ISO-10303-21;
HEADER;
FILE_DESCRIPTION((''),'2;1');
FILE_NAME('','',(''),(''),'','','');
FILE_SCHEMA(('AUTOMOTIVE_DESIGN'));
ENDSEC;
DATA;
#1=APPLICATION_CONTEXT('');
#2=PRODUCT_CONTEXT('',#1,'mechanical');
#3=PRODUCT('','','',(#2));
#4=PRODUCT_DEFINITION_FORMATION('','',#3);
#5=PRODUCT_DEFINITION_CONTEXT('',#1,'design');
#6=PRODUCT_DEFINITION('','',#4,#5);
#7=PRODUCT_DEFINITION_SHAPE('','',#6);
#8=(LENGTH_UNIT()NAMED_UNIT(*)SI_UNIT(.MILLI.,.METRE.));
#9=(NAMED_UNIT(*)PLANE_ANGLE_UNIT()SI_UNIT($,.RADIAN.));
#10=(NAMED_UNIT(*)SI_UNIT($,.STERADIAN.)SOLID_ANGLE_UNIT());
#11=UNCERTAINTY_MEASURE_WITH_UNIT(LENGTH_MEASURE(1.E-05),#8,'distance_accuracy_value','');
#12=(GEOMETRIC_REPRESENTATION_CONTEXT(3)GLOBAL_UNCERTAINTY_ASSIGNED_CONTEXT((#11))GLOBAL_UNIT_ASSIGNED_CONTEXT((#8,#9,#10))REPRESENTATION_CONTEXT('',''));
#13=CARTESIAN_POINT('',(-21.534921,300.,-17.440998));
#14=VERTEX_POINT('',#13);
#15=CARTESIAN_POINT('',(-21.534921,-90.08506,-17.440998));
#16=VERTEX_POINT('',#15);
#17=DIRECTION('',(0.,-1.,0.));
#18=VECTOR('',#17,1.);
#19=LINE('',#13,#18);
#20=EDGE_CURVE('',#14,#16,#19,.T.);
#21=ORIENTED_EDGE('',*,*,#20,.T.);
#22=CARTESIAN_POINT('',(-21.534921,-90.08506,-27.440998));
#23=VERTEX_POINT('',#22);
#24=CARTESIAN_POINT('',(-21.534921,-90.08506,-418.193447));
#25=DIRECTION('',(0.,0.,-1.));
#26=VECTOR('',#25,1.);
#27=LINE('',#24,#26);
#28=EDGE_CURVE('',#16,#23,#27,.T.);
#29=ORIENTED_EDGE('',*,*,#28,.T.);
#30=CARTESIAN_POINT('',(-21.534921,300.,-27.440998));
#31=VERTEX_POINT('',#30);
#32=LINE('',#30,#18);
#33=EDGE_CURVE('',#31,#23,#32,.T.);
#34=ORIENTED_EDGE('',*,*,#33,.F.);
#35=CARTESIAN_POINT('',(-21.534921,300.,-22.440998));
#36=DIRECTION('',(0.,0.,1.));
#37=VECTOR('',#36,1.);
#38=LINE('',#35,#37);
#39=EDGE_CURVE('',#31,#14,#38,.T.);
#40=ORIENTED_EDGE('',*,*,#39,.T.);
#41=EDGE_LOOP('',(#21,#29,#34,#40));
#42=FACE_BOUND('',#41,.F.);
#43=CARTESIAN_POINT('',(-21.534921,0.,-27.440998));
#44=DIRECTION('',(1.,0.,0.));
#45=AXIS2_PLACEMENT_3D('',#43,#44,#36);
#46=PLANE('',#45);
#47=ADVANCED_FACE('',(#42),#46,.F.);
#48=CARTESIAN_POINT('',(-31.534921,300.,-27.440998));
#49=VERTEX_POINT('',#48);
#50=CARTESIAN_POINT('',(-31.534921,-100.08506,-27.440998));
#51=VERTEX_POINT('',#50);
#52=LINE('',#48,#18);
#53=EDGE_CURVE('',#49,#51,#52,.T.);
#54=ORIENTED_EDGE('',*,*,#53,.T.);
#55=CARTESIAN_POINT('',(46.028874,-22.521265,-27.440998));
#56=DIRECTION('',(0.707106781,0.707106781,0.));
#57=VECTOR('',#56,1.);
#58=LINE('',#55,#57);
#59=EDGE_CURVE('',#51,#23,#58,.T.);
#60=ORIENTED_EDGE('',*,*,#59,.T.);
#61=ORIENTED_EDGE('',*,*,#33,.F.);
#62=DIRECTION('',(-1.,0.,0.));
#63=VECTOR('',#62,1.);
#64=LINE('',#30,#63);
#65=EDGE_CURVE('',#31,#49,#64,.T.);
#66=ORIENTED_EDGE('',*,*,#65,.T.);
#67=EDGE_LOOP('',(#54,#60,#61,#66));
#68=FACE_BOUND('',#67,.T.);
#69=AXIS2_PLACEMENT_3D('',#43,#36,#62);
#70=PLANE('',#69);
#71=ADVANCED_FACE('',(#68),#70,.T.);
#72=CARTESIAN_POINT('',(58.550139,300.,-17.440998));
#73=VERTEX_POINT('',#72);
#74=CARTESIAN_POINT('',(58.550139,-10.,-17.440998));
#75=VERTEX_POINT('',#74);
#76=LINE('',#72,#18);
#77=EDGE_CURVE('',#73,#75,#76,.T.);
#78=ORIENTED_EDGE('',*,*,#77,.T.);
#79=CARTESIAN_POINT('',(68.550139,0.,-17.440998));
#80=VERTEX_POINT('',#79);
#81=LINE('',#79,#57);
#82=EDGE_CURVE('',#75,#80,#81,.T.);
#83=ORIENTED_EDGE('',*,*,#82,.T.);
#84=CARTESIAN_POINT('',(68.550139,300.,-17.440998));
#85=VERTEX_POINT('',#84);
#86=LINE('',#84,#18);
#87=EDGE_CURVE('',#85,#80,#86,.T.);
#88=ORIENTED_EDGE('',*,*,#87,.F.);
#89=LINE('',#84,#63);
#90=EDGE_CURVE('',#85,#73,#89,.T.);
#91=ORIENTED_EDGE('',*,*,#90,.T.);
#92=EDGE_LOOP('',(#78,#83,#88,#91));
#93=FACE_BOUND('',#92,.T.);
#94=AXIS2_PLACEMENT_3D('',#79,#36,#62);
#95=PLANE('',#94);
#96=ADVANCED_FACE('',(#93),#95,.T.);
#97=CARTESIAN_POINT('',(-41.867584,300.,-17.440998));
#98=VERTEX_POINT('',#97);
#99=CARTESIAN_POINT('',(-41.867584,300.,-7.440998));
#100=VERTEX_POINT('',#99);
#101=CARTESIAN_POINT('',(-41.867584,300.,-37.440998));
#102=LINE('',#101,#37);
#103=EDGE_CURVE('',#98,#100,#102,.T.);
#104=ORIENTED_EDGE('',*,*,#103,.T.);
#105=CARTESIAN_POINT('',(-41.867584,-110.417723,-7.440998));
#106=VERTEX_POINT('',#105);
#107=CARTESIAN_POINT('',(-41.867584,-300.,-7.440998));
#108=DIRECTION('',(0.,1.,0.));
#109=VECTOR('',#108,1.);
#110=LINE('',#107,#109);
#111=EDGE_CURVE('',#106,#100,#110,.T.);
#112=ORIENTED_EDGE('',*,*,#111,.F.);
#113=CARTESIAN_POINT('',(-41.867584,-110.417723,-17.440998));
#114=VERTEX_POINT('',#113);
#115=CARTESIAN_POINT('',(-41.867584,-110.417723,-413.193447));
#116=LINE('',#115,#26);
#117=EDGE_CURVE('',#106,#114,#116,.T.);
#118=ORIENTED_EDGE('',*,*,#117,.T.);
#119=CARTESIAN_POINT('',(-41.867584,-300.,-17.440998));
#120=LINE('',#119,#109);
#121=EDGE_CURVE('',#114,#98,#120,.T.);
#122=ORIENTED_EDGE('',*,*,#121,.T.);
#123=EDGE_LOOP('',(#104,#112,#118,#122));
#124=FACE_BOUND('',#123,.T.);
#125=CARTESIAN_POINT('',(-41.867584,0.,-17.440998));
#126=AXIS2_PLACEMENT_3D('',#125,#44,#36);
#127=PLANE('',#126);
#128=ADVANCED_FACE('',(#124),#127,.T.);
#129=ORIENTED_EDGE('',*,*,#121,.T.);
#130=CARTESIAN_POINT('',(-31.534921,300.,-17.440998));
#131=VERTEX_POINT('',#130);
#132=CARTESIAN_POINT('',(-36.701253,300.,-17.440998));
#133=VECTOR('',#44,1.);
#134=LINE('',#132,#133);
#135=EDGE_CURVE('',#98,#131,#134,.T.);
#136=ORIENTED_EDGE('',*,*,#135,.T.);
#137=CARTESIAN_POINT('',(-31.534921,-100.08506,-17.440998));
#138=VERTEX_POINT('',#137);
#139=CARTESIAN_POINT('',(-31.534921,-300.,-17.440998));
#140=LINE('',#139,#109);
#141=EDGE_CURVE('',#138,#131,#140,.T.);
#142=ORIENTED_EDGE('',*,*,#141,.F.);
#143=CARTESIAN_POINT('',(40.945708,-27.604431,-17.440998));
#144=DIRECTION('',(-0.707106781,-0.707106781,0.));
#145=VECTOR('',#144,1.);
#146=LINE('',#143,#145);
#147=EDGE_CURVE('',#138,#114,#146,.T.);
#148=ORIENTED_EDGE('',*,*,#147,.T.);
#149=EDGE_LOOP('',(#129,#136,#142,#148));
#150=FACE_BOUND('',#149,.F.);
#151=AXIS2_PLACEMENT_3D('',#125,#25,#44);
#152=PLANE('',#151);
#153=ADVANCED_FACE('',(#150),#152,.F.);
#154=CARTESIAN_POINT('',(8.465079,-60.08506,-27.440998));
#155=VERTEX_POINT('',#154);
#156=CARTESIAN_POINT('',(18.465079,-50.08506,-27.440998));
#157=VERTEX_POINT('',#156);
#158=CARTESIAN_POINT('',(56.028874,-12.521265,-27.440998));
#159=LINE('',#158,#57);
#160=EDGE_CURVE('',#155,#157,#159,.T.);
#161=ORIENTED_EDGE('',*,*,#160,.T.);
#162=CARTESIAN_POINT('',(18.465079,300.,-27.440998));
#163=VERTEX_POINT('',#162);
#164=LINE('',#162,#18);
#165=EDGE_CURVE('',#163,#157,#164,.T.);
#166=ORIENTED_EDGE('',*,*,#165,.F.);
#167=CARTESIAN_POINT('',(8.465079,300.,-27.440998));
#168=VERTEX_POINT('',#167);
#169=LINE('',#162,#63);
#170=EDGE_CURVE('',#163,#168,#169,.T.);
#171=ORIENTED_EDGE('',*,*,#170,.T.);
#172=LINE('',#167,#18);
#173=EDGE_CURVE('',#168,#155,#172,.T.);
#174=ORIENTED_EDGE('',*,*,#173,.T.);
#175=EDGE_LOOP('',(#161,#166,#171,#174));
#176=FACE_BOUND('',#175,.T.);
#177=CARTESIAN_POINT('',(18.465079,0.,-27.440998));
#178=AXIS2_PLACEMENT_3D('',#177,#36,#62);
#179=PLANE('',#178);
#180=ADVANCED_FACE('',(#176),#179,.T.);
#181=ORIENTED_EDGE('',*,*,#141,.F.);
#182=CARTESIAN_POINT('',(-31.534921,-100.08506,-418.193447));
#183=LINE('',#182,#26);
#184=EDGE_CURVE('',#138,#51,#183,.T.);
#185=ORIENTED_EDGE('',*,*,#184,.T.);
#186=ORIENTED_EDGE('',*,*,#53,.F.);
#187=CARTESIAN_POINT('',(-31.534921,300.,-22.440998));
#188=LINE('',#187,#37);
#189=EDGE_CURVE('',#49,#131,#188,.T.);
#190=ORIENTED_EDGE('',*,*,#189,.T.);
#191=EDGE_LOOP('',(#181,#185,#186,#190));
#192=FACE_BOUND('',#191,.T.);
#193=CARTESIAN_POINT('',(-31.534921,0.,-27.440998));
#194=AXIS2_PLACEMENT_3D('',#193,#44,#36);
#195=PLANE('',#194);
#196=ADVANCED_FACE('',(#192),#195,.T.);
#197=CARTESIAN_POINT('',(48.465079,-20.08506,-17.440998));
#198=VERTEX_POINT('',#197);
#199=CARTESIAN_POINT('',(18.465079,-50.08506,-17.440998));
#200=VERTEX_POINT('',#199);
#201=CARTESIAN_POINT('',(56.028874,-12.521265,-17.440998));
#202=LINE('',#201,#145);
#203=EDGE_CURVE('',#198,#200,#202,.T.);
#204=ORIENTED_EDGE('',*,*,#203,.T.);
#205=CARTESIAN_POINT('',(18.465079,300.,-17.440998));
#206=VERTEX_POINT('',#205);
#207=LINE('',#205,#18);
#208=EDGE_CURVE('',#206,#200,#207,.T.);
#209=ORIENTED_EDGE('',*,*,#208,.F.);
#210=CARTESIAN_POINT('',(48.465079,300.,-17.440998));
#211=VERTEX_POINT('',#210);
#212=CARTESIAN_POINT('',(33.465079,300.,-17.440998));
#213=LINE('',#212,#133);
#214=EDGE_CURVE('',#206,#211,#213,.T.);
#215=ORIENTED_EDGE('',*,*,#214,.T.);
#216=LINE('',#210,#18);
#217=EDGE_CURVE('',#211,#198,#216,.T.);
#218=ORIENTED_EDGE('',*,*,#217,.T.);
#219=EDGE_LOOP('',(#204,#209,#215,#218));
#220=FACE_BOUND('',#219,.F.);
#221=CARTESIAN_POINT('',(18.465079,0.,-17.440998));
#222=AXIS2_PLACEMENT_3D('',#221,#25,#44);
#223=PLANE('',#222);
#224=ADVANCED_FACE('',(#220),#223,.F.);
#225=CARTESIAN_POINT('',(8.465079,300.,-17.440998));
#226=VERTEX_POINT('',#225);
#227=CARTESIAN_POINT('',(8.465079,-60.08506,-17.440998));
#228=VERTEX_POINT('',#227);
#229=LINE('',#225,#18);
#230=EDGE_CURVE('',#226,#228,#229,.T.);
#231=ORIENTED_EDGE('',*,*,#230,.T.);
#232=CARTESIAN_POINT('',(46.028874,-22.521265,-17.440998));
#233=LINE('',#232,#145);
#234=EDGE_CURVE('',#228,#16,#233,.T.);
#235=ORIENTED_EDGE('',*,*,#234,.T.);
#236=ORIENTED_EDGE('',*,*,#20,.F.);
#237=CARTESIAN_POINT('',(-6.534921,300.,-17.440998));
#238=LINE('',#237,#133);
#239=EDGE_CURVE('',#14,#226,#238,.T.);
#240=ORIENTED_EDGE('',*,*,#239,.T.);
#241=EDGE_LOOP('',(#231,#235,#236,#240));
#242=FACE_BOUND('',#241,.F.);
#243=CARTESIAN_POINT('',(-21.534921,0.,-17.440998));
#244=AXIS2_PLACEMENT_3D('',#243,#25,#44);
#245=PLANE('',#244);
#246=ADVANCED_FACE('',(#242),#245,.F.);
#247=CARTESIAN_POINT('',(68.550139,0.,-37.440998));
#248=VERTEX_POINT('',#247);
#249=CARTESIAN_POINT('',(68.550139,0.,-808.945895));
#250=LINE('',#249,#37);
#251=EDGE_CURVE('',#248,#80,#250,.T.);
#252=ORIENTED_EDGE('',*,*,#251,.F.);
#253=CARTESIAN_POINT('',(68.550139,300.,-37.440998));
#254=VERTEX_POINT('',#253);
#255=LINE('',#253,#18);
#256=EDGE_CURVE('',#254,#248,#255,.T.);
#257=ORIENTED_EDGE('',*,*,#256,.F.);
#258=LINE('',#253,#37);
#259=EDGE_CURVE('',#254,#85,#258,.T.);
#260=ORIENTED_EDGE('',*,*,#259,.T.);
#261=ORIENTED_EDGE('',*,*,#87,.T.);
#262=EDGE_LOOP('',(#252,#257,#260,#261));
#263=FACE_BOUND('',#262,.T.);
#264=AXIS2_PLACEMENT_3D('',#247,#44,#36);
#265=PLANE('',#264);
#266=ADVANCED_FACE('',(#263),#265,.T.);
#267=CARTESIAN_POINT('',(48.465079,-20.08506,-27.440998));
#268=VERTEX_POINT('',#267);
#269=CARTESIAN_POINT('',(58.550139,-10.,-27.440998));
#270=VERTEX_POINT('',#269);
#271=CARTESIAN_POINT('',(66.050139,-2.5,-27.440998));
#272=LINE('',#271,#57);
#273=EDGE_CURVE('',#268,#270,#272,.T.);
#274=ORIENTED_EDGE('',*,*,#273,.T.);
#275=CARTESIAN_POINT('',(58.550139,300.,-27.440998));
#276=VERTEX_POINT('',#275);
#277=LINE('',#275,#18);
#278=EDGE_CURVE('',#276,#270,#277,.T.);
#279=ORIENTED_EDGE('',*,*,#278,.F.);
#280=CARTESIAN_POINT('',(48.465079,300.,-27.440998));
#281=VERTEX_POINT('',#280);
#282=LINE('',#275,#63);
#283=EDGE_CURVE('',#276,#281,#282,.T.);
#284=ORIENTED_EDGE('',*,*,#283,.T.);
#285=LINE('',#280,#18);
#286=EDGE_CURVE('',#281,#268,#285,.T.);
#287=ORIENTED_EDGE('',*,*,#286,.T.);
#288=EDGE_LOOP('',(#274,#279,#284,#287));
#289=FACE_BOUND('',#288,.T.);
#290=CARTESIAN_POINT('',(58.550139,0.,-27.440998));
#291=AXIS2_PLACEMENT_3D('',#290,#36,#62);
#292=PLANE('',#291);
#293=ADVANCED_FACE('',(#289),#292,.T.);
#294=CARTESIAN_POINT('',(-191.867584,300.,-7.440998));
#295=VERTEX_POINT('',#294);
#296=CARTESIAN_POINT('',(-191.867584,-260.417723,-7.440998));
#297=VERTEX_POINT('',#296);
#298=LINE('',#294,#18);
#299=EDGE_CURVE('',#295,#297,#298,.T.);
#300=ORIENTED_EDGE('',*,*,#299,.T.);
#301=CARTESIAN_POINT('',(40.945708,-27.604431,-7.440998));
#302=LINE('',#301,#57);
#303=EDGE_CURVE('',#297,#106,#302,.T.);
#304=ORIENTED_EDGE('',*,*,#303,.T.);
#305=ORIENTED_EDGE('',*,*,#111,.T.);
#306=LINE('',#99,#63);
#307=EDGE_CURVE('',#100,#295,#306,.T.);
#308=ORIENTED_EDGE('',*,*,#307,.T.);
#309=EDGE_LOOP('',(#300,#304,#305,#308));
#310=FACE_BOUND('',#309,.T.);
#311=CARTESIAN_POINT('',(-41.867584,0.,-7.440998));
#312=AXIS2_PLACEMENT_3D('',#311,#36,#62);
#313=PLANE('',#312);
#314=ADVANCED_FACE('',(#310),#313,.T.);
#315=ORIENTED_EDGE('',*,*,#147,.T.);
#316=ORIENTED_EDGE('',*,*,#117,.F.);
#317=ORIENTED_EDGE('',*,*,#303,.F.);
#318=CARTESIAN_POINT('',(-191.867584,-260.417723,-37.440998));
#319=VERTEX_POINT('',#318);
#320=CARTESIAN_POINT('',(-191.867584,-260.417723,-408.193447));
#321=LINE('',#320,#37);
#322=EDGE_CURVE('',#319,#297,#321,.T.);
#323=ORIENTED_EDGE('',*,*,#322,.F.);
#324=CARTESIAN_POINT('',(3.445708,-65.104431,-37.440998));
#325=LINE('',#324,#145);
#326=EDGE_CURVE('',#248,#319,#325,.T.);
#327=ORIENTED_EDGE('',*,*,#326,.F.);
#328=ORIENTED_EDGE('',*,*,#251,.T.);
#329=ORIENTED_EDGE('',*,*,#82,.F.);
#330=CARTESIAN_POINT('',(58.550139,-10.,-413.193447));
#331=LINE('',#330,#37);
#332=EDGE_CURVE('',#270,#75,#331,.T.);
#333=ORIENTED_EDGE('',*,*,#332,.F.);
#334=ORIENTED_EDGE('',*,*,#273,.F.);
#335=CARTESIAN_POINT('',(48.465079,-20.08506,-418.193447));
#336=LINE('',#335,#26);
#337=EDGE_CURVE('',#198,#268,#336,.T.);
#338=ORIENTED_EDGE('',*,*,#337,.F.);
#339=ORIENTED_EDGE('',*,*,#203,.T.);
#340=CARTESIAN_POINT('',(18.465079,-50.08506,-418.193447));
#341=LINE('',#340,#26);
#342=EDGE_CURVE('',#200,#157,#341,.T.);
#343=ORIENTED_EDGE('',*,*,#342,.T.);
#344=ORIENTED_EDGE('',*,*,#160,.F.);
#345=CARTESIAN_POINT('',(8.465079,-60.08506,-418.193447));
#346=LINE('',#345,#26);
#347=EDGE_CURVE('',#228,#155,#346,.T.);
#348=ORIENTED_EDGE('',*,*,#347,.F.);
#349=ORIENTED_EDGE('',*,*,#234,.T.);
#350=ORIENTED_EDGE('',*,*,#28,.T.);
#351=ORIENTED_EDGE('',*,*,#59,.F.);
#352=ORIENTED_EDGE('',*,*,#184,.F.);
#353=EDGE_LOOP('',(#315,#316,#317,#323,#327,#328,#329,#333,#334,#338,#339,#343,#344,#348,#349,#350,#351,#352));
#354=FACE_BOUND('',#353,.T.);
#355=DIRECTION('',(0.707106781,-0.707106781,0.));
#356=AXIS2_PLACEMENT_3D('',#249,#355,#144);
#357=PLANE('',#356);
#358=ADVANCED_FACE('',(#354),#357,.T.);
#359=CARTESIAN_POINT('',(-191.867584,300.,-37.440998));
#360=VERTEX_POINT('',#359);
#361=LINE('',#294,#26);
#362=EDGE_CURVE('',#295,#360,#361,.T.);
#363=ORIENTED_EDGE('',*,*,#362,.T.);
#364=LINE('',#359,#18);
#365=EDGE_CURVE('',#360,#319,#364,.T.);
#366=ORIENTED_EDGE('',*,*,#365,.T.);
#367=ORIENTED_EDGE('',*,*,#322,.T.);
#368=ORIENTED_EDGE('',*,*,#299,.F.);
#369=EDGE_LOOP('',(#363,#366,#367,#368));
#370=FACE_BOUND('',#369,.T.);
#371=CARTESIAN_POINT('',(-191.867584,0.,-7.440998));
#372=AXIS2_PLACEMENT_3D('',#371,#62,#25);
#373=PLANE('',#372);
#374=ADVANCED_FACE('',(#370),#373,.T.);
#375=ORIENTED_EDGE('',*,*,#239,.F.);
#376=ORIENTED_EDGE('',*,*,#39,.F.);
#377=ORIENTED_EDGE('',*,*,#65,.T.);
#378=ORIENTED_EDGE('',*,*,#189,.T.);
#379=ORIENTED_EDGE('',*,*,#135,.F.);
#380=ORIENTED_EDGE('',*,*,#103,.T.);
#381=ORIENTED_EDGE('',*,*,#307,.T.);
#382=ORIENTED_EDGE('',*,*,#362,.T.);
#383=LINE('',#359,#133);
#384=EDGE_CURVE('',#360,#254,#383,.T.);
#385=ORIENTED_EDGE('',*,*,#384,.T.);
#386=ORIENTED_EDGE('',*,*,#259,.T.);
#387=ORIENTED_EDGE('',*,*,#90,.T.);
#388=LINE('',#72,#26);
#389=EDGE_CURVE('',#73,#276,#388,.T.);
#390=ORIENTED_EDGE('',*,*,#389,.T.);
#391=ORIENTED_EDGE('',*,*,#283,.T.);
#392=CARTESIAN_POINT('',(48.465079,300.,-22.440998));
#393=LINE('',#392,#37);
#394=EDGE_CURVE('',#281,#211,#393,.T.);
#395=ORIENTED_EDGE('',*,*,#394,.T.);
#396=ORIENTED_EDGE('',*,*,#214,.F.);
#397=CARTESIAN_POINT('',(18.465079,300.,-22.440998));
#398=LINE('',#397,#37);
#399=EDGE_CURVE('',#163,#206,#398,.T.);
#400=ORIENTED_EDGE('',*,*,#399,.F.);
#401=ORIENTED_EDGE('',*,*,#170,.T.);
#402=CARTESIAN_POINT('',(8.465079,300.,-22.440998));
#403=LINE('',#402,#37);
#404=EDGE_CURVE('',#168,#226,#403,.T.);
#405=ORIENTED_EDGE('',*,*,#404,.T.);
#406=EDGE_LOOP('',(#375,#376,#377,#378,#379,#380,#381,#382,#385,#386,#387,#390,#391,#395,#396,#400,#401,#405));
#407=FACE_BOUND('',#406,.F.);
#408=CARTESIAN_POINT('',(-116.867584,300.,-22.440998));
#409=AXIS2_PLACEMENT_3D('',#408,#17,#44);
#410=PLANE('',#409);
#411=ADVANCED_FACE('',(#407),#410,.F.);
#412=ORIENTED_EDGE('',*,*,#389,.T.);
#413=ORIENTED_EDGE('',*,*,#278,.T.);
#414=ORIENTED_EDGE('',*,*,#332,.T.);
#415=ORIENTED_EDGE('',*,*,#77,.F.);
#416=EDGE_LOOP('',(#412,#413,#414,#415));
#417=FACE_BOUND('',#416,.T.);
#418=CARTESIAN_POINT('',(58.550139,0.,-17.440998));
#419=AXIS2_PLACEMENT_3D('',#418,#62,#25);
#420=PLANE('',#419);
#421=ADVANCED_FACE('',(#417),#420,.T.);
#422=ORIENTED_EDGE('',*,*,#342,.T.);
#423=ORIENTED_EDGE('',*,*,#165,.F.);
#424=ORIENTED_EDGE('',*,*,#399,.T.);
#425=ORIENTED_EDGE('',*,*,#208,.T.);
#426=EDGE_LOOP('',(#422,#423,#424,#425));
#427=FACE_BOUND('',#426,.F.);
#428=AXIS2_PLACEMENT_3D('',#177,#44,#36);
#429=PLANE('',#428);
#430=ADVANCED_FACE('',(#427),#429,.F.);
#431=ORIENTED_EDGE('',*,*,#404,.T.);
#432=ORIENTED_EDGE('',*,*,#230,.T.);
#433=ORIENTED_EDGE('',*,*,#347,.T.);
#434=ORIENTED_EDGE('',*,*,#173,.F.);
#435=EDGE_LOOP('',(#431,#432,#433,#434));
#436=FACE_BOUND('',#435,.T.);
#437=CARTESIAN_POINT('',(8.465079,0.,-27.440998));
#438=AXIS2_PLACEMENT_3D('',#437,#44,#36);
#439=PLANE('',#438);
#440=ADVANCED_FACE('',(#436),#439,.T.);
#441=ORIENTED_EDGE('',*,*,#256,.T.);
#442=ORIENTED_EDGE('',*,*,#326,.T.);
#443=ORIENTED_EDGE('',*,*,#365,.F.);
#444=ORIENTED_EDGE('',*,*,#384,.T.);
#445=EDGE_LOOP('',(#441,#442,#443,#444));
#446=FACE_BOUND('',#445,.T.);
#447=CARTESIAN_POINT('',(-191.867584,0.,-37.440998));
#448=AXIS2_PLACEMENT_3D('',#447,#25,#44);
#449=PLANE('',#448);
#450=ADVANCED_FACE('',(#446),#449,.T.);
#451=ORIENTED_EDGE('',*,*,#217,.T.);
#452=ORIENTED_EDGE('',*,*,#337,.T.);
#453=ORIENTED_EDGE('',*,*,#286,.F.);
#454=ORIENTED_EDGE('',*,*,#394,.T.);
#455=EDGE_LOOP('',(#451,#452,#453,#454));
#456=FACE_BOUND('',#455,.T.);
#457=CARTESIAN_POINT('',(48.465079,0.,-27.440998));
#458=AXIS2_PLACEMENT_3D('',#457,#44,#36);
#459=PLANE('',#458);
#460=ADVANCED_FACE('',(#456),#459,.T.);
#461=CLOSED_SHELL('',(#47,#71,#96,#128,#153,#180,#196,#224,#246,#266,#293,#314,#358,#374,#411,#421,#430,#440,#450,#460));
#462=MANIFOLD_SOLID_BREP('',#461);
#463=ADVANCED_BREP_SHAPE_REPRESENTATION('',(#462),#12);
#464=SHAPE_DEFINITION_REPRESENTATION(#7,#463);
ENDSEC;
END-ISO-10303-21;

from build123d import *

# Parameters (mm, degrees)
F0_W        = 30
F0_H        = 10
F0_W_2      = 10.3326633751
F1_DEPTH    = 300
F2_T1_DEPTH = 1563.0097927795


# Not quite as in the source:
# - a fillet or chamfer that OpenCascade refuses, or shapes differently, is made with other operations: its cross-section is extruded or revolved along the edge and cut away or added


with BuildPart() as f1:
    # F0 (on Front) → F1 (new body, symmetric)
    with BuildSketch(Plane.XZ):
        Polygon((-41.8675842226, -17.4409984683), (-41.8675842226, -7.4409984683), (-191.8675842226, -7.4409984683), (-191.8675842226, -37.4409984683), (-41.8675842226, -37.4409984683), (-41.8675842226, -27.4409984683), align=None)
        with Locations((33.4650791525, -22.4409984683)):
            Rectangle(F0_W, F0_H)
        with Locations((-36.7012525351, -22.4409984683)):
            Rectangle(F0_W_2, F0_H)
        with Locations((-6.5349208475, -22.4409984683)):
            Rectangle(F0_W, F0_H)
        Polygon((-31.5349208475, -27.4409984683), (-41.8675842226, -27.4409984683), (-41.8675842226, -37.4409984683), (58.5501386541, -37.4409984683), (58.5501386541, -27.4409984683), (48.4650791525, -27.4409984683), (18.4650791525, -27.4409984683), (8.4650791525, -27.4409984683), (-21.5349208475, -27.4409984683), align=None)
        Polygon((58.5501386541, -27.4409984683), (58.5501386541, -37.4409984683), (68.5501386541, -37.4409984683), (68.5501386541, -17.4409984683), (58.5501386541, -17.4409984683), align=None)
    extrude(amount=F1_DEPTH, both=True)

    # F2: chamfer of 300 on 1 edges, made by hand

    # F2_s2 → F2_t1 (cut)
    with BuildSketch(Plane.XY.offset(-808.945894858)):
        Polygon((68.5501386541, 0), (-231.4498613459, -300), (68.5501386541, -300), align=None)
    extrude(amount=F2_T1_DEPTH, mode=Mode.SUBTRACT)


solid = f1.part
